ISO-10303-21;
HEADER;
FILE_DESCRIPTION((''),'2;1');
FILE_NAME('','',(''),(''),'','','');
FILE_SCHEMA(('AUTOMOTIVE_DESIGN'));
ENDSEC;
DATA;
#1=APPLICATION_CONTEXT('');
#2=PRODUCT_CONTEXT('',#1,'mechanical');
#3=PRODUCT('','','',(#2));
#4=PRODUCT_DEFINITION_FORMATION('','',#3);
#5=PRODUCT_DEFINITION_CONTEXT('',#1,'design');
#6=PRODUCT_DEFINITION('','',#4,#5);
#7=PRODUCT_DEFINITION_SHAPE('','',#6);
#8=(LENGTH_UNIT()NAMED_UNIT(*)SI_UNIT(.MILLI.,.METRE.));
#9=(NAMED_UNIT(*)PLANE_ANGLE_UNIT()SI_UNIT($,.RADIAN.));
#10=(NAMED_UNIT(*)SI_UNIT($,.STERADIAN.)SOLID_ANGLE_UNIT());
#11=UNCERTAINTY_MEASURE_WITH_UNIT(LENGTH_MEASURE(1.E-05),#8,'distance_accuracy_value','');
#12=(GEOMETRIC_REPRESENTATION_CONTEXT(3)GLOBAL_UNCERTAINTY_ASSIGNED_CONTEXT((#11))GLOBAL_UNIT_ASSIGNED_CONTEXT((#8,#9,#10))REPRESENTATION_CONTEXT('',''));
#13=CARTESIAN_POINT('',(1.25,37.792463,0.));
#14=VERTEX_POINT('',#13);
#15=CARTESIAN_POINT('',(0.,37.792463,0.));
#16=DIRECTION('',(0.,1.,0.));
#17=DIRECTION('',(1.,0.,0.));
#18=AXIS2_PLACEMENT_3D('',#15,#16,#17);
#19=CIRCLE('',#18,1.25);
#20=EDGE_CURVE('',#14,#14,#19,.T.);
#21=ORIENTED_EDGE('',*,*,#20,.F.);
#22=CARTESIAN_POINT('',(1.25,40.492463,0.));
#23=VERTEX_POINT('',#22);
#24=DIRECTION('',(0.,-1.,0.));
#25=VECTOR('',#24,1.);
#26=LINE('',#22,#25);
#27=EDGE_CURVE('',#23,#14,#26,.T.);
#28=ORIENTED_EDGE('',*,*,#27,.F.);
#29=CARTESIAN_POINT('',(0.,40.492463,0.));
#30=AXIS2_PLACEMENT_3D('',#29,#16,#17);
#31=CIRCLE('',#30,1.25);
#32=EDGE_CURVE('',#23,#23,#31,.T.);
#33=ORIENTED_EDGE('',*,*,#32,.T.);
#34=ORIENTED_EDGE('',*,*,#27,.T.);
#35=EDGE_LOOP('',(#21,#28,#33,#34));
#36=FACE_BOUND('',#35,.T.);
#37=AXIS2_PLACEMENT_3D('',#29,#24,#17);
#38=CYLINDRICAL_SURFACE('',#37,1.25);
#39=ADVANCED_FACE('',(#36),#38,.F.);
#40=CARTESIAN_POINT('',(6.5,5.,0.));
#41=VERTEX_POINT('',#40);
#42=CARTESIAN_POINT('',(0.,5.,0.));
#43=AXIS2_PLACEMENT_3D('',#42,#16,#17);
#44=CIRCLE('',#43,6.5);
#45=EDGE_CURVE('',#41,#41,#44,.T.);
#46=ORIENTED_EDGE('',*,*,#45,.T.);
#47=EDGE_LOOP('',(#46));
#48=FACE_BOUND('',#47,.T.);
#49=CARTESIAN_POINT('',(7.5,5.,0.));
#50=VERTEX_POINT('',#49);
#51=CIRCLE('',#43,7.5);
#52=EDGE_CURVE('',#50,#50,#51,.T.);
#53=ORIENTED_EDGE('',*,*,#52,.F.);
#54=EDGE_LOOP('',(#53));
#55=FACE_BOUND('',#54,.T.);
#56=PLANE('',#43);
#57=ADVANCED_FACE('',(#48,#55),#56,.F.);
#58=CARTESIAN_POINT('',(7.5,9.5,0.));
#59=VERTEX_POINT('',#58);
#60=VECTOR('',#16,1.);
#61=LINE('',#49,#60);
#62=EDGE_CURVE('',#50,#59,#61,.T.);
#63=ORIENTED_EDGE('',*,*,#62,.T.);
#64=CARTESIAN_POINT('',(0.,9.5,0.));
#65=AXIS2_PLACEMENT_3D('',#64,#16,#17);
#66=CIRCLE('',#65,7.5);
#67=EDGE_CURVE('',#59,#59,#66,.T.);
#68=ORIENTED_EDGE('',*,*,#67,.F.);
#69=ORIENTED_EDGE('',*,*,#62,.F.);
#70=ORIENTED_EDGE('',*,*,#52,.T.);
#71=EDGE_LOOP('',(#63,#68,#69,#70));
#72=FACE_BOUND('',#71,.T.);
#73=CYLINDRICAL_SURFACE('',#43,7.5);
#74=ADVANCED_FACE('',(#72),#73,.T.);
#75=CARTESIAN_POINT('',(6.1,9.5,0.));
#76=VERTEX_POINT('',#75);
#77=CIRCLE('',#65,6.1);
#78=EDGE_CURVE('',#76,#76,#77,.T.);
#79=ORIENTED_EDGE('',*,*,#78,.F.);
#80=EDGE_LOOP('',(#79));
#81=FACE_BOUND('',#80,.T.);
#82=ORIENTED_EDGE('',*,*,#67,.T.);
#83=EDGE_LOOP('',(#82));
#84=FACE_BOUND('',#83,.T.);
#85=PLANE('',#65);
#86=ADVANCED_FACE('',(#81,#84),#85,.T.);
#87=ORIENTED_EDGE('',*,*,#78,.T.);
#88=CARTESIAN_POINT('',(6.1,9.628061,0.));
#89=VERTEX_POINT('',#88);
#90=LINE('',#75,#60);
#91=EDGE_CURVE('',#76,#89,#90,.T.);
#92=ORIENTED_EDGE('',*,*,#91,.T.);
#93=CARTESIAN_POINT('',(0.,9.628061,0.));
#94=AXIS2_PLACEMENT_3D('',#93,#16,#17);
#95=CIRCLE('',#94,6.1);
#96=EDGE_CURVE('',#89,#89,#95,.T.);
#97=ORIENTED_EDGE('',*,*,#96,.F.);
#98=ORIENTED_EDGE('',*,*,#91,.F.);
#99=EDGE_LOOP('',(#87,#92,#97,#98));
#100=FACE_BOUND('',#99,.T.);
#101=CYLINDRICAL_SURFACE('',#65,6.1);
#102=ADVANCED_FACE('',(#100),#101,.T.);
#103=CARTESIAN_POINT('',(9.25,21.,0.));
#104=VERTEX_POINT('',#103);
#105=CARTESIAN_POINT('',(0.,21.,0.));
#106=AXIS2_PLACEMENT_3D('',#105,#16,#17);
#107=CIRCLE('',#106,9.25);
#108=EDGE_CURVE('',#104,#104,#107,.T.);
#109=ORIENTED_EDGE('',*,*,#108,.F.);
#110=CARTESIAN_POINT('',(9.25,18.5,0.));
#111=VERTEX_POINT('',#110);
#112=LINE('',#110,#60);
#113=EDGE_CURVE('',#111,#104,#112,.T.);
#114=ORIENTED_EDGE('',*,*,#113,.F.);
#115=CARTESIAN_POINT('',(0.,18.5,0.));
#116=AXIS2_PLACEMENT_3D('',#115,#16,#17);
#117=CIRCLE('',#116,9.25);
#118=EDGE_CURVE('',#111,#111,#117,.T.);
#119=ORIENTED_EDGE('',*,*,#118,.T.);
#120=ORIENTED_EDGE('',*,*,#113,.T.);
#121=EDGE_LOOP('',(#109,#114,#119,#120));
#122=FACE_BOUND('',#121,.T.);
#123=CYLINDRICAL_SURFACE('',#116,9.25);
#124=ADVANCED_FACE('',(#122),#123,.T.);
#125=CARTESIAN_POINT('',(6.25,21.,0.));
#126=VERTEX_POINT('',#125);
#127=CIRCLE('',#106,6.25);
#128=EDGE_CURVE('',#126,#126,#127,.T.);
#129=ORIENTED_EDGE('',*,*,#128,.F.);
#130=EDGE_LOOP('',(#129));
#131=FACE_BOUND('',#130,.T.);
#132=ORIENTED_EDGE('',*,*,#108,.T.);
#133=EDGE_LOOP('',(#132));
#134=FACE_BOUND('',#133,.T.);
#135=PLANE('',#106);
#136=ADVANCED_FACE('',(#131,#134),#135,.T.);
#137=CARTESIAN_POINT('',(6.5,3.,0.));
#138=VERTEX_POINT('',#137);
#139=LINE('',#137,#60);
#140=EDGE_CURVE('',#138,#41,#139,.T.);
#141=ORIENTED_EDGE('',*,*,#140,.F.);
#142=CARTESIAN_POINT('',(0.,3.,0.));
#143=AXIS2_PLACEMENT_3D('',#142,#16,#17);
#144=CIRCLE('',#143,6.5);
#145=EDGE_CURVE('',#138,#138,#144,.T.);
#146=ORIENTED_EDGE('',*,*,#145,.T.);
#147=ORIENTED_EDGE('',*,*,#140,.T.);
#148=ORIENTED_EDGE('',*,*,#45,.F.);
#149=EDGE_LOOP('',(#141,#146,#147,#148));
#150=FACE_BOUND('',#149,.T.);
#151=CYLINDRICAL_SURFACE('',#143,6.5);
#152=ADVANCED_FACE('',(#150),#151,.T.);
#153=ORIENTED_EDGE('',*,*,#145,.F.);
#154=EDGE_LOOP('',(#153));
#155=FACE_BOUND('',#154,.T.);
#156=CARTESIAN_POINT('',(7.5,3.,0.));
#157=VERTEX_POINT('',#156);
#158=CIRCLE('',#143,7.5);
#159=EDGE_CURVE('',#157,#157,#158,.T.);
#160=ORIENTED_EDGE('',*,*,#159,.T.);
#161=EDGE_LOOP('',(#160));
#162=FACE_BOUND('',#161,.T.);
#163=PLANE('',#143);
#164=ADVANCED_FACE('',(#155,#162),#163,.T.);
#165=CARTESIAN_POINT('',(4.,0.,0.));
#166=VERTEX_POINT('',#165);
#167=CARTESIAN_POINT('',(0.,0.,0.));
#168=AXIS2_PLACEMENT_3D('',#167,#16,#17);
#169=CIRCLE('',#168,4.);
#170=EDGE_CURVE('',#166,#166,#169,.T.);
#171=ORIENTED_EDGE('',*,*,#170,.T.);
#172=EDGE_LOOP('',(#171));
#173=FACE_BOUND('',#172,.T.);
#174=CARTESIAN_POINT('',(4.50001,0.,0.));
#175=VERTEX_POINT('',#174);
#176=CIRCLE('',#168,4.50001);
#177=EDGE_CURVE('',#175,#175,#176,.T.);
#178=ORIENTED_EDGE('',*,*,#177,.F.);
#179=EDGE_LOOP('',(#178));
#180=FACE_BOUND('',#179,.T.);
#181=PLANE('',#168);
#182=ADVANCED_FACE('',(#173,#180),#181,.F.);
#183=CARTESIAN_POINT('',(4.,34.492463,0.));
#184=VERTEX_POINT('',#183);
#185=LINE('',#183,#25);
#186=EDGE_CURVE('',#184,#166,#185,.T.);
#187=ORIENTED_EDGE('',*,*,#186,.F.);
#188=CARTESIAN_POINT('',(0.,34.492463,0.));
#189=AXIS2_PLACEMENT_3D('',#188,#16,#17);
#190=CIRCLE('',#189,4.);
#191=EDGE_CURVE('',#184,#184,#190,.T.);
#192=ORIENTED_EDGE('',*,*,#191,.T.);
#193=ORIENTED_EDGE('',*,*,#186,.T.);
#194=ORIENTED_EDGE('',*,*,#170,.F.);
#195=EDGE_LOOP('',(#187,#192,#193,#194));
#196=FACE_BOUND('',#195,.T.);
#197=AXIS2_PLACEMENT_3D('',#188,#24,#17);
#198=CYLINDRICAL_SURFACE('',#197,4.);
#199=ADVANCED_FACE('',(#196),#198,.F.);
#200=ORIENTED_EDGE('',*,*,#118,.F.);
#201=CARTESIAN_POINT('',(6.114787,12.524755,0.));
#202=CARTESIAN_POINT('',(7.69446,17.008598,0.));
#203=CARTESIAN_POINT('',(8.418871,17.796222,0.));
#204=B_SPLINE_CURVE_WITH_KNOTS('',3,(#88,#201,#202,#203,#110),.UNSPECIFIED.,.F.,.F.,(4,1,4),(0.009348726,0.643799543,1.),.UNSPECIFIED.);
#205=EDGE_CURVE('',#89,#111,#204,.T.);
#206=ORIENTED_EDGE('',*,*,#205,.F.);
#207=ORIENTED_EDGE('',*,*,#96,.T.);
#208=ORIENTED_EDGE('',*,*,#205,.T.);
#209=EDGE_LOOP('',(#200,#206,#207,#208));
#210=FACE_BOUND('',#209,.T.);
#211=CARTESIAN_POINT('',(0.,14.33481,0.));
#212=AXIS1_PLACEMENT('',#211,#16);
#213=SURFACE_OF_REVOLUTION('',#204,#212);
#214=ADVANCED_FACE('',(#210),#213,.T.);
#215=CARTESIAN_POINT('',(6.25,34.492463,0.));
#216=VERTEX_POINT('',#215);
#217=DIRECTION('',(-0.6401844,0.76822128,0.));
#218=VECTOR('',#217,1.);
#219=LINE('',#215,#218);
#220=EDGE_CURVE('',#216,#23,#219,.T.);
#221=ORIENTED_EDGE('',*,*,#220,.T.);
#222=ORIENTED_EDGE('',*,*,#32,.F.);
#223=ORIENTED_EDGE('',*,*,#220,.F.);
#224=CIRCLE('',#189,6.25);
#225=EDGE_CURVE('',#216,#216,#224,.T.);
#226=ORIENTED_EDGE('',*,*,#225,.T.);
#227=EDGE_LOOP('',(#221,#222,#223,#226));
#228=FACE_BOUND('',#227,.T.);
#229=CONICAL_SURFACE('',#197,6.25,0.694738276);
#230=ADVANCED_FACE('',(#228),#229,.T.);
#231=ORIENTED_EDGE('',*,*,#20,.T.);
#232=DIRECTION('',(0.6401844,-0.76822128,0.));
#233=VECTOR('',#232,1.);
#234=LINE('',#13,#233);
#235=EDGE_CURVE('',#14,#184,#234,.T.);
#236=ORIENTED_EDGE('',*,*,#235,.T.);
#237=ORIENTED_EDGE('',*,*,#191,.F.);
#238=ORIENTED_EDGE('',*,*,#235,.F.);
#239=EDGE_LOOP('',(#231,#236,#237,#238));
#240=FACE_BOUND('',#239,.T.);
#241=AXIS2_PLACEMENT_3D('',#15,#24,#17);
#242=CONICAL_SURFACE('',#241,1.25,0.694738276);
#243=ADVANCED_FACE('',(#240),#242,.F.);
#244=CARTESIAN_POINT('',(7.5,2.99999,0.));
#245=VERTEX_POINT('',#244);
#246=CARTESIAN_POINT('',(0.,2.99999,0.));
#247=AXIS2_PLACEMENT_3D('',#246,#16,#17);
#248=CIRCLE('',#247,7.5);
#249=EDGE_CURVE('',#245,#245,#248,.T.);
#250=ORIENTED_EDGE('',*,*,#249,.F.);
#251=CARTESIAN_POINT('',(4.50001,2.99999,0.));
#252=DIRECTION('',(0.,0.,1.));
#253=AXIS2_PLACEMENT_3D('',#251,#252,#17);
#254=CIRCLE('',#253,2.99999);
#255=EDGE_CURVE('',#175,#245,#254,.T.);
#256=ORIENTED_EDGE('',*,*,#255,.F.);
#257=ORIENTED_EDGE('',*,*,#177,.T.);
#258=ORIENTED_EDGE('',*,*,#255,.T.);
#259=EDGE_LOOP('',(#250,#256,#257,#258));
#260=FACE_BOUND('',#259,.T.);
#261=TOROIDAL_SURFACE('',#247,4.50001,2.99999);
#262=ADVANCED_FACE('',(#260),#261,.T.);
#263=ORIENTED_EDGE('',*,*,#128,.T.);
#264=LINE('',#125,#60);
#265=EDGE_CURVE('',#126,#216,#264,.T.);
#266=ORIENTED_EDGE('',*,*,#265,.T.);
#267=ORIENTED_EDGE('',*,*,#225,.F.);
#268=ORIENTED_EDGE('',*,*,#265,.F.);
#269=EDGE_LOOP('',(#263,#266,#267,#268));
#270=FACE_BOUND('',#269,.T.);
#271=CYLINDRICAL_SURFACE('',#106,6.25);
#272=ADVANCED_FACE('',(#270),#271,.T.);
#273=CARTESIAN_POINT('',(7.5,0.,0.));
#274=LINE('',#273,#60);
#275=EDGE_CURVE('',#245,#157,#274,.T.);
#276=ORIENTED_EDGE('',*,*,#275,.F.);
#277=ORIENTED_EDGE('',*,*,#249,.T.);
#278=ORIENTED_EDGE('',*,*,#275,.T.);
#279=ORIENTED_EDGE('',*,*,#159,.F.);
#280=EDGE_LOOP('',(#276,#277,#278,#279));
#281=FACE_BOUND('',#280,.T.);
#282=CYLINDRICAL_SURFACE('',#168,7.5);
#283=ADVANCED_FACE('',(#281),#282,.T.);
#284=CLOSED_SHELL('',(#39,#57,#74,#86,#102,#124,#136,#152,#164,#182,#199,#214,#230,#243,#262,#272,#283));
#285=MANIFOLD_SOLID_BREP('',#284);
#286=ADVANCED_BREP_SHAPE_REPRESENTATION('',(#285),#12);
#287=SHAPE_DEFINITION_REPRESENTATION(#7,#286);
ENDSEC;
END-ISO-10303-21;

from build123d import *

# Parameters (mm, degrees)
F0_W = 2.25
F0_H = 10.4924628735
F2_R = 2.99999


# Not quite as in the source:
# - a fillet or chamfer is up to 0.001 mm smaller than in the source, because OpenCascade refuses the exact size


with BuildPart() as f1:
    # F0 (on Top) → F1 (revolve)
    with BuildSketch(Plane.XY):
        with BuildLine():
            Line((4, 10), (4, 0))
            Line((4, 0), (7.5, 0))
            Line((7.5, 0), (7.5, 3))
            Line((7.5, 3), (6.5, 3))
            Line((6.5, 3), (6.5, 5))
            Line((6.5, 5), (7.5, 5))
            Line((7.5, 5), (7.5, 9.5))
            Line((7.5, 9.5), (6.1, 9.5))
            add(Edge.make_bspline(
                [(6.1, 9.5), (6.0997806749, 9.542689319), (6.0997821122, 9.585377965), (6.1, 9.6280611679)],
                knots=[0, 0, 0, 0, 0.0093487262, 0.0093487262, 0.0093487262, 0.0093487262], degree=3))
            add(Edge.make_bspline(
                [(6.1, 9.6280611679), (6.1147869444, 12.5247545063), (7.6944598018, 17.0085980566), (8.4188714562, 17.7962221352), (9.25, 18.5)],
                knots=[0.0093487262, 0.0093487262, 0.0093487262, 0.0093487262, 0.6437995433, 1, 1, 1, 1], degree=3))
            Line((9.25, 18.5), (9.25, 21))
            Line((9.25, 21), (6.25, 21))
            Line((6.25, 21), (6.25, 24))
            Line((6.25, 24), (4, 24))
            Line((4, 24), (4, 10))
        make_face()
        with Locations((5.125, 29.2462314367)):
            Rectangle(F0_W, F0_H)
        Polygon((1.25, 37.7924628735), (4, 34.4924628735), (6.25, 34.4924628735), (1.25, 40.4924628735), align=None)
        with BuildLine():
            Line((6.1, 9.5), (6.1, 9.6280611679))
            add(Edge.make_bspline(
                [(6.1, 9.5), (6.0997806749, 9.542689319), (6.0997821122, 9.585377965), (6.1, 9.6280611679)],
                knots=[0, 0, 0, 0, 0.0093487262, 0.0093487262, 0.0093487262, 0.0093487262], degree=3))
        make_face()
    revolve(axis=Axis((0, 14.3348099664, 0), (0, 1, 0)))

    # F2 (radius 3 in the source; OpenCascade refuses exactly that, so slightly less here)
    f2_edges = [f1.edges().sort_by_distance(p)[0] for p in [
        (-7.5, 0, 0),
    ]]
    fillet(f2_edges, radius=F2_R)


solid = f1.part
